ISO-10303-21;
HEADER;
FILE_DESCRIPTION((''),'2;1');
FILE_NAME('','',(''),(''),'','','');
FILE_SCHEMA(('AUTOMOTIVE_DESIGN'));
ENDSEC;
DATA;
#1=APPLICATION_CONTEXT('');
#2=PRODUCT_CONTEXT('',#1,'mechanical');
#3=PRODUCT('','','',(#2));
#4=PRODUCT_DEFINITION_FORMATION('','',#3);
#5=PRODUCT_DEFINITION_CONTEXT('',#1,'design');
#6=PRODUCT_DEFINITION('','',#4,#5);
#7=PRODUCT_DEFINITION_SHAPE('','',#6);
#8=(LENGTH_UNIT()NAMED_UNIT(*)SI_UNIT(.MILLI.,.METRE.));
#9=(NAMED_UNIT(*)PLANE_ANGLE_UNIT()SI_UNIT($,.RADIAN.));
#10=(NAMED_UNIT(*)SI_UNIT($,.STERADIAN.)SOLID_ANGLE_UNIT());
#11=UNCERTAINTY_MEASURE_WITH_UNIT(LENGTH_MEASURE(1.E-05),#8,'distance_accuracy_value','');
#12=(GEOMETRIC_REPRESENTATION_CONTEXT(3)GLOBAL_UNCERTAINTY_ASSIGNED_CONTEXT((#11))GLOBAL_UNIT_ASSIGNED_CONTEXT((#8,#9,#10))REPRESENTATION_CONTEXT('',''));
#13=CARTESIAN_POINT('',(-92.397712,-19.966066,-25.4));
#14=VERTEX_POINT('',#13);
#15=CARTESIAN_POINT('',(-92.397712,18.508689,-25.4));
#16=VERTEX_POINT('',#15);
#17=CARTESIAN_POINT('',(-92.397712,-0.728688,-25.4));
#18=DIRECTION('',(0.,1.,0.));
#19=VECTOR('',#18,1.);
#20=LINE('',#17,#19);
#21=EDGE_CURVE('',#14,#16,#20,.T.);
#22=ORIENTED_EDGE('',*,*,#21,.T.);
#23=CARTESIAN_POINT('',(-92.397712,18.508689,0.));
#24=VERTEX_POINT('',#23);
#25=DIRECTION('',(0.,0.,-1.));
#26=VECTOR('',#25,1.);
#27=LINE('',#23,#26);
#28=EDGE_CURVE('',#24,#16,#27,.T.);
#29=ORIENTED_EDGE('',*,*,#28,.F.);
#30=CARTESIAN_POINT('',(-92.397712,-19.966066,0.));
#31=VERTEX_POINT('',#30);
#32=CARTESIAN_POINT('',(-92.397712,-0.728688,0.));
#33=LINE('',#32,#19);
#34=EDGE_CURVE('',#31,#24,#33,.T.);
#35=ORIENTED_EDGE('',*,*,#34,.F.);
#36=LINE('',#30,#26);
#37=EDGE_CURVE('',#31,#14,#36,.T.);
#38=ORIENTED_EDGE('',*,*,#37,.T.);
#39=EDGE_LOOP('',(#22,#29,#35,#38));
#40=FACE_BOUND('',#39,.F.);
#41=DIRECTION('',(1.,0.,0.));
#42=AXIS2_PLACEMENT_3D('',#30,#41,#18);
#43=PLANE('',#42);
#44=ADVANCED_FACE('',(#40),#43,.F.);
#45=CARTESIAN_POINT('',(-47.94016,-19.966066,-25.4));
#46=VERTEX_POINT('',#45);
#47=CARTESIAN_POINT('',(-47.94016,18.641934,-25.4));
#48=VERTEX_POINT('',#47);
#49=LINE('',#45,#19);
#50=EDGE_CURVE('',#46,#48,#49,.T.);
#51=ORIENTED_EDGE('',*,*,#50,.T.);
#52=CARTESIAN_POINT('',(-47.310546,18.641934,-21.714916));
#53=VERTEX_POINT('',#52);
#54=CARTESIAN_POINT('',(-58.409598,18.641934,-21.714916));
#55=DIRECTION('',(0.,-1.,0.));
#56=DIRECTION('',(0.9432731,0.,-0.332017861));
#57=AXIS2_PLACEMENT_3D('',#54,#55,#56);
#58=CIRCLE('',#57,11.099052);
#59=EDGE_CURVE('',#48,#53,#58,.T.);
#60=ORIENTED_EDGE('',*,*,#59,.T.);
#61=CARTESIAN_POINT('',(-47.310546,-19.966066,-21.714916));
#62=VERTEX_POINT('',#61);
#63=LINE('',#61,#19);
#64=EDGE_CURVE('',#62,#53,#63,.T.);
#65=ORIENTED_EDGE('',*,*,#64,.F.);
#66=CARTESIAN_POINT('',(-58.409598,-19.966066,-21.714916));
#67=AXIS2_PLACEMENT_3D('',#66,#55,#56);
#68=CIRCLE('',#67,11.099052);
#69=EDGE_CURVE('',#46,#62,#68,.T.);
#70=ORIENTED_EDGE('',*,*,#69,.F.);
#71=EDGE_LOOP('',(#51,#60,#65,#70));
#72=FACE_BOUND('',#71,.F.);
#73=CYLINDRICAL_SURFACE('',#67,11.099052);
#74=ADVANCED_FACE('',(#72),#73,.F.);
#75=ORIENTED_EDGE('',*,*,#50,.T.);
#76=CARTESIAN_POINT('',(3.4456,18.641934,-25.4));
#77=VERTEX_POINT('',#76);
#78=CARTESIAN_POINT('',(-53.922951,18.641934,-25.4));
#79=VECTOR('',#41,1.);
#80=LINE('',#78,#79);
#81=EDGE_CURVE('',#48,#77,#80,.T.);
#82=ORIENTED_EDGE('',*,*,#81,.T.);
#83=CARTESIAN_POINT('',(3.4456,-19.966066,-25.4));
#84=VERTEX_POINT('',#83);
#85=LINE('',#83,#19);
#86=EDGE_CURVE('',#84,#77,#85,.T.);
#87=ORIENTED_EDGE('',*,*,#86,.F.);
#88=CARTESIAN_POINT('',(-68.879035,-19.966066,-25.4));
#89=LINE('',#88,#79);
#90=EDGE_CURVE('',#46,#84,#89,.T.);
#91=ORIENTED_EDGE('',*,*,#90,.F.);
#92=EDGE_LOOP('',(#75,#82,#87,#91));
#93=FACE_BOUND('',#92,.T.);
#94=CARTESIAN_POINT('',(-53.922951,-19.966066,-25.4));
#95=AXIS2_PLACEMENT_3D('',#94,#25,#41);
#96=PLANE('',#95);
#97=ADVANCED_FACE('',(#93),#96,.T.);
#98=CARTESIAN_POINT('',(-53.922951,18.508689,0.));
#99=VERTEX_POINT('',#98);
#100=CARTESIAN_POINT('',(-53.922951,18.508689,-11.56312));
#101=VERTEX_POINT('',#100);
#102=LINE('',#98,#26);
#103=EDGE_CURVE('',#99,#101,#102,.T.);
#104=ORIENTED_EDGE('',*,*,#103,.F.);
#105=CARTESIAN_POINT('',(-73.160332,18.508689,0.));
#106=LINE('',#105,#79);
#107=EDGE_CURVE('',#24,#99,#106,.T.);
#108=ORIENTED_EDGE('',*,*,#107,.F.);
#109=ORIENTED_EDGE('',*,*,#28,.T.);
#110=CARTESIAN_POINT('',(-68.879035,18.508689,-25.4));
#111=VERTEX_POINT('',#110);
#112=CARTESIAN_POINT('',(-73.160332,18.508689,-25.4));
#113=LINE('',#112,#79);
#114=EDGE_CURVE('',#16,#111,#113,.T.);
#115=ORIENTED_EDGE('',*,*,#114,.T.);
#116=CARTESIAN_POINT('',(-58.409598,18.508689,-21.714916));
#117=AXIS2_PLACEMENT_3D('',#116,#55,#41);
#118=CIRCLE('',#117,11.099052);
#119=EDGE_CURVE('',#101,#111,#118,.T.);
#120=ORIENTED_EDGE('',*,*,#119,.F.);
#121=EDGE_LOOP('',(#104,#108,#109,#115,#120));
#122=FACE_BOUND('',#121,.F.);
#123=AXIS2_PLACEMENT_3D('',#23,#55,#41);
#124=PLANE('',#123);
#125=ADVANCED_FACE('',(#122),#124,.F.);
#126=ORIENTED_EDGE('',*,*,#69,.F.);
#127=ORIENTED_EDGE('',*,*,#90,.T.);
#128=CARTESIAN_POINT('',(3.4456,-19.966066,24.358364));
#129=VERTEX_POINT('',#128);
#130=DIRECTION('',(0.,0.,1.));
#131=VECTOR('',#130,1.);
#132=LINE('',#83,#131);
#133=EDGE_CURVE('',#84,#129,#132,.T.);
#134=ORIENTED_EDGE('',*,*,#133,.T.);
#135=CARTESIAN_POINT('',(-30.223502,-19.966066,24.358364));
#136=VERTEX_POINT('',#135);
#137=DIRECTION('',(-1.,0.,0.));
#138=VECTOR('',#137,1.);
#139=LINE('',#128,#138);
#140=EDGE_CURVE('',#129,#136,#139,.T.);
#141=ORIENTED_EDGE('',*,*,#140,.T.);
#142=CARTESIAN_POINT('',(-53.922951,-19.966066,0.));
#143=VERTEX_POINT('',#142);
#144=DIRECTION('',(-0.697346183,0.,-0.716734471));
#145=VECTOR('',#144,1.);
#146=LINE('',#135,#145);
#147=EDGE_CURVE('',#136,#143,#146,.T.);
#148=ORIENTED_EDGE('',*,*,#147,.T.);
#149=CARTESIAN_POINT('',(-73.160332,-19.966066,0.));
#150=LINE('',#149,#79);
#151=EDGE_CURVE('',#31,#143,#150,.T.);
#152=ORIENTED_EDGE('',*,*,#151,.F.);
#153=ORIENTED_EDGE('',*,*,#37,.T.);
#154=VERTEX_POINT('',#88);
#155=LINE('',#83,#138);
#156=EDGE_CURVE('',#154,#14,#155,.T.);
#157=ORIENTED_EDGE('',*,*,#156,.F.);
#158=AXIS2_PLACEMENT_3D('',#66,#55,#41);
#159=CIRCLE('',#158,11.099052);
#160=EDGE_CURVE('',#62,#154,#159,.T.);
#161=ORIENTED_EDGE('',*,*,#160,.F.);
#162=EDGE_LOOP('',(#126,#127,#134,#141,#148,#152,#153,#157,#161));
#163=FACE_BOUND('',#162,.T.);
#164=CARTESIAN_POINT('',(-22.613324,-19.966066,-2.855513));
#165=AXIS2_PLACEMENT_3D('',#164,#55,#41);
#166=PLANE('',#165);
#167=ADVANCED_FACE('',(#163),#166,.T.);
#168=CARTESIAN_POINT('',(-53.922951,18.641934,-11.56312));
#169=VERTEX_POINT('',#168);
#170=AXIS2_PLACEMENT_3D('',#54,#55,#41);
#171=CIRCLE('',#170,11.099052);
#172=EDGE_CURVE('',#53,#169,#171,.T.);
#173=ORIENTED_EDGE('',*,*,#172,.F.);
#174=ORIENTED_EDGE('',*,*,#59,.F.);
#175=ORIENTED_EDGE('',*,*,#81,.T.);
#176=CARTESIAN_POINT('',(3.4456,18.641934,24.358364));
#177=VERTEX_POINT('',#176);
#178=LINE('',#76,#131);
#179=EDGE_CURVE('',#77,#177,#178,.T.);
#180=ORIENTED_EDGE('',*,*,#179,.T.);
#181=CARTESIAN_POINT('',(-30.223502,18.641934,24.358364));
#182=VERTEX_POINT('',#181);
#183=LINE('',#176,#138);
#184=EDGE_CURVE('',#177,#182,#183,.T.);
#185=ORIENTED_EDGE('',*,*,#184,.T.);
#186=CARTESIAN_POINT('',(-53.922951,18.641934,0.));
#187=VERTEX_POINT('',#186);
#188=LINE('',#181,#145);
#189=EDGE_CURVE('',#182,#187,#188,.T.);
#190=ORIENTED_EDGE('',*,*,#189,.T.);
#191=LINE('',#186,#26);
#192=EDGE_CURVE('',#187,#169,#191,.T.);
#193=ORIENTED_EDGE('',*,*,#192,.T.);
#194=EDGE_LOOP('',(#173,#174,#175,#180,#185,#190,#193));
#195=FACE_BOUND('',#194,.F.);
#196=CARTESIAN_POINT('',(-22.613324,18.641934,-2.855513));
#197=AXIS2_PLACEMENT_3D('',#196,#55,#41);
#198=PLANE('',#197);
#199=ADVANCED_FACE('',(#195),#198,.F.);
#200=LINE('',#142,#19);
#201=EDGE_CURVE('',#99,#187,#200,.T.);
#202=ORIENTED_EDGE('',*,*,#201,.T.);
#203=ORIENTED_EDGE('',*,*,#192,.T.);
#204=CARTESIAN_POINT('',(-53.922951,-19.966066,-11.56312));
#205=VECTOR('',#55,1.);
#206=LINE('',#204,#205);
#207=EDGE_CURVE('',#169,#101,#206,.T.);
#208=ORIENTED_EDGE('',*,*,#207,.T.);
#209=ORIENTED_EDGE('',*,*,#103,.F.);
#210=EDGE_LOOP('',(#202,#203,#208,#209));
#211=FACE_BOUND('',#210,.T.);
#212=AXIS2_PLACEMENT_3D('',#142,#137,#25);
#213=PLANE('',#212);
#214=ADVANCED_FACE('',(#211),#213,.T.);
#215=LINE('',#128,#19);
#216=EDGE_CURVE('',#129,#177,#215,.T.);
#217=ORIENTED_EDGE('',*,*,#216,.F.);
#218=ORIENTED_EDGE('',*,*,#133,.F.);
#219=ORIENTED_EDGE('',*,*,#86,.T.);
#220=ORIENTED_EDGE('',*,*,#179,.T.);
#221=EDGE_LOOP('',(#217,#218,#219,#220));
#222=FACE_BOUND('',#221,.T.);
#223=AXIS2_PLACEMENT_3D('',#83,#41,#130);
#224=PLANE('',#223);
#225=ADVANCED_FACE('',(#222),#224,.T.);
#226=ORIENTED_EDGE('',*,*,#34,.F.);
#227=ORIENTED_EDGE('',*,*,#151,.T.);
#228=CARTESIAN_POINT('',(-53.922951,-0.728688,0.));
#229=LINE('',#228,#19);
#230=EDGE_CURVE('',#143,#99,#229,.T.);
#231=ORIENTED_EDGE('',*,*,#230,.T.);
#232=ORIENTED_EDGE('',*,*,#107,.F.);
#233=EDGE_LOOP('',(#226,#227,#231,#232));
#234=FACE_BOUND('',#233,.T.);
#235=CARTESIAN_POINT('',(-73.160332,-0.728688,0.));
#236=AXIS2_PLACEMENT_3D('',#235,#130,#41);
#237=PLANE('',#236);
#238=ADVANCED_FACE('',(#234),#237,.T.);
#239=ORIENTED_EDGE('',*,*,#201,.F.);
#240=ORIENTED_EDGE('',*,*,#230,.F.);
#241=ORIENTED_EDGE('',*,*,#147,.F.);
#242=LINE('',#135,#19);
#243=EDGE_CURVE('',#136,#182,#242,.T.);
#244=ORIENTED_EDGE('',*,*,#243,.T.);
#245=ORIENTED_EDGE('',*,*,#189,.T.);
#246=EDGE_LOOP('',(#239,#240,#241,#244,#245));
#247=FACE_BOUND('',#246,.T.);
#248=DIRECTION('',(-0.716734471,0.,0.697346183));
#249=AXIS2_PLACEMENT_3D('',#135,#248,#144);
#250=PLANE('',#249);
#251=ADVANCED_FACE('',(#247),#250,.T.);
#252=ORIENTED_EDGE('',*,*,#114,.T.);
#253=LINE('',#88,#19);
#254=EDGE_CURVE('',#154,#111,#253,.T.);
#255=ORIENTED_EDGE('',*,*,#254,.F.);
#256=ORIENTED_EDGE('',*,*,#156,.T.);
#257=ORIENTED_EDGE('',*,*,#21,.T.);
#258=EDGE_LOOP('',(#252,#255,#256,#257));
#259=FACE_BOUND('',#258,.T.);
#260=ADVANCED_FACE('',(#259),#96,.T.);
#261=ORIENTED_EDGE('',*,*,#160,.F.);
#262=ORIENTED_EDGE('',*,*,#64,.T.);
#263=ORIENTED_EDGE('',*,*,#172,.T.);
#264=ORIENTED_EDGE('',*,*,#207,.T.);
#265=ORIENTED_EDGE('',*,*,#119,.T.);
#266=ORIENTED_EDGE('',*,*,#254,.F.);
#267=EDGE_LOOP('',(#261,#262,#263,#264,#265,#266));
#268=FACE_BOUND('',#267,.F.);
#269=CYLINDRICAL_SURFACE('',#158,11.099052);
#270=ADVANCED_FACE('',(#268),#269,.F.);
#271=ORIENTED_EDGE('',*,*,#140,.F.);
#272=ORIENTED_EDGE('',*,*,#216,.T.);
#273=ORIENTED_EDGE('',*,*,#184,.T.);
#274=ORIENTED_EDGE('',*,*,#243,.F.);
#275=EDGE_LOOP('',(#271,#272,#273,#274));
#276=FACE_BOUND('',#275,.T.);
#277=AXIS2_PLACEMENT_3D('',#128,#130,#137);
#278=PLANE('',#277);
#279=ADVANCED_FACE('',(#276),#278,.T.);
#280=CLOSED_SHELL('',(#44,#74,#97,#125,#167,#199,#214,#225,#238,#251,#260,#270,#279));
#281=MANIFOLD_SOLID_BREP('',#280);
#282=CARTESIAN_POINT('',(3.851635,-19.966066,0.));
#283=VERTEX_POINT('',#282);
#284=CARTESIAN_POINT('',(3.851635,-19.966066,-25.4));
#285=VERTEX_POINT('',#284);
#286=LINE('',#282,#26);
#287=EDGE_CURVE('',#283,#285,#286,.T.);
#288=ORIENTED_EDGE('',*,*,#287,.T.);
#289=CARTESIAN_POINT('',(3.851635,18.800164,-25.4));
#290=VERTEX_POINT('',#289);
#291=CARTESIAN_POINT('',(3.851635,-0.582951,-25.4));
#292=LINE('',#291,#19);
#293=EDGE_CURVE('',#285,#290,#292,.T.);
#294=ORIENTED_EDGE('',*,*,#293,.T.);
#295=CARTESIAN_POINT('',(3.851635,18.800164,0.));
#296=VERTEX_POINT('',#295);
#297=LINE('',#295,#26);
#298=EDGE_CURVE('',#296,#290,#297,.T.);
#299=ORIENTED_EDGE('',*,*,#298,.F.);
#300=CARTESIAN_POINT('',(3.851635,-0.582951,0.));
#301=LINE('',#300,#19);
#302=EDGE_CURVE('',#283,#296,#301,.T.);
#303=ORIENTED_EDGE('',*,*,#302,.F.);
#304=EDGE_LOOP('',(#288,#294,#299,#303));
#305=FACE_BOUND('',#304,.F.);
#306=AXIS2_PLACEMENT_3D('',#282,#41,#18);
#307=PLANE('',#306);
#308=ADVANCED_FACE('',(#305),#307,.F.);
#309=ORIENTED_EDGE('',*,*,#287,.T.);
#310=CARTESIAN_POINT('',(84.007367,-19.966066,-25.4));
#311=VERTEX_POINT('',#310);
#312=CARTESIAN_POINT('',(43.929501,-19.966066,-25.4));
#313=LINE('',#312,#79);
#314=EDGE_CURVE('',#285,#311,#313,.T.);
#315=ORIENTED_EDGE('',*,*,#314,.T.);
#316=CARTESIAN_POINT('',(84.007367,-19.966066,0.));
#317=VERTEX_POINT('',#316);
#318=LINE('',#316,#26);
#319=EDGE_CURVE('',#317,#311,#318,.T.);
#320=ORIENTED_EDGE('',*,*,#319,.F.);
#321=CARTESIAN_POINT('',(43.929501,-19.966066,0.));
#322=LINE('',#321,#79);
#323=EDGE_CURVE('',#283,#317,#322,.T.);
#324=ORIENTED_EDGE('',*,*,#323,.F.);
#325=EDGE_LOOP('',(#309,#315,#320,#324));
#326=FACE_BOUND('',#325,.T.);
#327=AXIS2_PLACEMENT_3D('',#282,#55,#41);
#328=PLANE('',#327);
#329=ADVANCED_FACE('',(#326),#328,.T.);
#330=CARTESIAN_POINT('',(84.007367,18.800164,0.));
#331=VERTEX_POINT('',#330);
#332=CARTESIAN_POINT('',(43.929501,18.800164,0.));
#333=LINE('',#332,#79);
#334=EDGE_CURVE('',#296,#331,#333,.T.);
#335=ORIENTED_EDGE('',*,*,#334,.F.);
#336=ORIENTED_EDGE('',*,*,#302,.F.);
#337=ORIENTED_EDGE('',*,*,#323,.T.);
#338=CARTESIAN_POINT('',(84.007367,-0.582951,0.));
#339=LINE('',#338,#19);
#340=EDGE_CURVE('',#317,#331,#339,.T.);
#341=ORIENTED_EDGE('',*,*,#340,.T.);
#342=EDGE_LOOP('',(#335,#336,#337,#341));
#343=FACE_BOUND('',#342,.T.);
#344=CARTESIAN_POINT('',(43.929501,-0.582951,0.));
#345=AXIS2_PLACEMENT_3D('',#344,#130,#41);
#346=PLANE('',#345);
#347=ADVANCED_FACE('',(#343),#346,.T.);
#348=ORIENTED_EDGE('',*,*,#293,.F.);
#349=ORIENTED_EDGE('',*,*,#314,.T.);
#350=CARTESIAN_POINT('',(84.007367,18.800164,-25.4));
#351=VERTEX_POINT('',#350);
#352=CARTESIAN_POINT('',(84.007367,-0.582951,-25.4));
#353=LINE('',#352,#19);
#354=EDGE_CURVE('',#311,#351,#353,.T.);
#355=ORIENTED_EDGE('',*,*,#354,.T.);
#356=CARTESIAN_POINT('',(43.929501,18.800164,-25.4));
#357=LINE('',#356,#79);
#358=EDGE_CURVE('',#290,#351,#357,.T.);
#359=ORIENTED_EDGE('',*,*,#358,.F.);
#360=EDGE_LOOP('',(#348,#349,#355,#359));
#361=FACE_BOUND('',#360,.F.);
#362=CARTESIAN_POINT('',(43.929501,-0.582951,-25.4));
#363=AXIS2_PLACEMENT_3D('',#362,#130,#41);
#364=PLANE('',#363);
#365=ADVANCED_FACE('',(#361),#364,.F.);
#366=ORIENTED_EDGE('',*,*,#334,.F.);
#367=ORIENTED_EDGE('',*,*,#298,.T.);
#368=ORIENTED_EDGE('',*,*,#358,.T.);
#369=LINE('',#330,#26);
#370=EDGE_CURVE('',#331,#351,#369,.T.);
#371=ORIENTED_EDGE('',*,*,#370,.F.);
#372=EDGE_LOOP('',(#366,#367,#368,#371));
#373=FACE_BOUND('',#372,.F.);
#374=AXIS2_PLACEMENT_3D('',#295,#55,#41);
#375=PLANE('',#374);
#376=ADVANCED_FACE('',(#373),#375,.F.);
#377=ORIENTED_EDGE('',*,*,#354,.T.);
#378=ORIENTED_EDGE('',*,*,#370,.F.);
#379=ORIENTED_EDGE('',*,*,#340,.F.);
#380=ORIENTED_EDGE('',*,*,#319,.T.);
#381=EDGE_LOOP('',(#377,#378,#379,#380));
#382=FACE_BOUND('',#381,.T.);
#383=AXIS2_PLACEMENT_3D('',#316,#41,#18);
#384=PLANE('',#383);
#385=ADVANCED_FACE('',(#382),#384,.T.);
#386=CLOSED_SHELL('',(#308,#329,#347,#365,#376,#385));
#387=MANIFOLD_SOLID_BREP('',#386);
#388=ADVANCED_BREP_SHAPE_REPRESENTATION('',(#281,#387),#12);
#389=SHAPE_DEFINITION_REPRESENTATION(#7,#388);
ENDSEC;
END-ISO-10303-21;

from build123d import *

# Parameters (mm, degrees)
F0_W          = 38.4747609496
F0_H          = 38.4747553617
F1_DEPTH      = 25.4
F3_DEPTH      = 38.608
F4_W          = 80.1557321101
F4_H          = 38.7662295252
F5_DEPTH      = 25.4
F7_DEPTH      = 210
F7_DEPTH_BACK = 127


# Not quite as in the source:
# - an extrude ends at something that could not be found from the text; its depth is read off the source's solid


with BuildPart() as f1:
    # F0 (on Top) → F1 (new body)
    with BuildSketch(Plane.XY):
        with Locations((-73.1603316963, -0.7286882028)):
            Rectangle(F0_W, F0_H)
    extrude(amount=-F1_DEPTH)

    # F2 (on face) → F3 (join)
    with BuildSketch(Plane.XZ.offset(19.9660658836)):
        Polygon((-53.9229512215, 0), (-53.9229512215, -25.4), (3.4455996938, -25.4), (3.4455996938, 24.3583643333), (-30.2235017333, 24.3583643333), align=None)
    extrude(amount=-F3_DEPTH)

    # F6 (on face) → F7 (cut, two sides)
    with BuildSketch(Plane.XZ.offset(19.9660658836)) as f7_sk:
        with BuildLine():
            ThreePointArc((-47.9401604074, -25.4), (-47.4690815305, -23.5841579821), (-47.3105455809, -21.7149164528))
            ThreePointArc((-47.3105455809, -21.7149164528), (-60.278839254, -10.7744002586), (-68.8790350419, -25.4))
            Line((-68.8790350419, -25.4), (-47.9401604074, -25.4))
        make_face()
    extrude(amount=F7_DEPTH, mode=Mode.SUBTRACT)
    extrude(f7_sk.sketch, amount=-F7_DEPTH_BACK, mode=Mode.SUBTRACT)


with BuildPart() as f5:
    # F4 (on Top) → F5 (new body)
    with BuildSketch(Plane.XY):
        with Locations((43.9295014367, -0.582951121)):
            Rectangle(F4_W, F4_H)
    extrude(amount=-F5_DEPTH)


solid = Compound([f1.part, f5.part])
